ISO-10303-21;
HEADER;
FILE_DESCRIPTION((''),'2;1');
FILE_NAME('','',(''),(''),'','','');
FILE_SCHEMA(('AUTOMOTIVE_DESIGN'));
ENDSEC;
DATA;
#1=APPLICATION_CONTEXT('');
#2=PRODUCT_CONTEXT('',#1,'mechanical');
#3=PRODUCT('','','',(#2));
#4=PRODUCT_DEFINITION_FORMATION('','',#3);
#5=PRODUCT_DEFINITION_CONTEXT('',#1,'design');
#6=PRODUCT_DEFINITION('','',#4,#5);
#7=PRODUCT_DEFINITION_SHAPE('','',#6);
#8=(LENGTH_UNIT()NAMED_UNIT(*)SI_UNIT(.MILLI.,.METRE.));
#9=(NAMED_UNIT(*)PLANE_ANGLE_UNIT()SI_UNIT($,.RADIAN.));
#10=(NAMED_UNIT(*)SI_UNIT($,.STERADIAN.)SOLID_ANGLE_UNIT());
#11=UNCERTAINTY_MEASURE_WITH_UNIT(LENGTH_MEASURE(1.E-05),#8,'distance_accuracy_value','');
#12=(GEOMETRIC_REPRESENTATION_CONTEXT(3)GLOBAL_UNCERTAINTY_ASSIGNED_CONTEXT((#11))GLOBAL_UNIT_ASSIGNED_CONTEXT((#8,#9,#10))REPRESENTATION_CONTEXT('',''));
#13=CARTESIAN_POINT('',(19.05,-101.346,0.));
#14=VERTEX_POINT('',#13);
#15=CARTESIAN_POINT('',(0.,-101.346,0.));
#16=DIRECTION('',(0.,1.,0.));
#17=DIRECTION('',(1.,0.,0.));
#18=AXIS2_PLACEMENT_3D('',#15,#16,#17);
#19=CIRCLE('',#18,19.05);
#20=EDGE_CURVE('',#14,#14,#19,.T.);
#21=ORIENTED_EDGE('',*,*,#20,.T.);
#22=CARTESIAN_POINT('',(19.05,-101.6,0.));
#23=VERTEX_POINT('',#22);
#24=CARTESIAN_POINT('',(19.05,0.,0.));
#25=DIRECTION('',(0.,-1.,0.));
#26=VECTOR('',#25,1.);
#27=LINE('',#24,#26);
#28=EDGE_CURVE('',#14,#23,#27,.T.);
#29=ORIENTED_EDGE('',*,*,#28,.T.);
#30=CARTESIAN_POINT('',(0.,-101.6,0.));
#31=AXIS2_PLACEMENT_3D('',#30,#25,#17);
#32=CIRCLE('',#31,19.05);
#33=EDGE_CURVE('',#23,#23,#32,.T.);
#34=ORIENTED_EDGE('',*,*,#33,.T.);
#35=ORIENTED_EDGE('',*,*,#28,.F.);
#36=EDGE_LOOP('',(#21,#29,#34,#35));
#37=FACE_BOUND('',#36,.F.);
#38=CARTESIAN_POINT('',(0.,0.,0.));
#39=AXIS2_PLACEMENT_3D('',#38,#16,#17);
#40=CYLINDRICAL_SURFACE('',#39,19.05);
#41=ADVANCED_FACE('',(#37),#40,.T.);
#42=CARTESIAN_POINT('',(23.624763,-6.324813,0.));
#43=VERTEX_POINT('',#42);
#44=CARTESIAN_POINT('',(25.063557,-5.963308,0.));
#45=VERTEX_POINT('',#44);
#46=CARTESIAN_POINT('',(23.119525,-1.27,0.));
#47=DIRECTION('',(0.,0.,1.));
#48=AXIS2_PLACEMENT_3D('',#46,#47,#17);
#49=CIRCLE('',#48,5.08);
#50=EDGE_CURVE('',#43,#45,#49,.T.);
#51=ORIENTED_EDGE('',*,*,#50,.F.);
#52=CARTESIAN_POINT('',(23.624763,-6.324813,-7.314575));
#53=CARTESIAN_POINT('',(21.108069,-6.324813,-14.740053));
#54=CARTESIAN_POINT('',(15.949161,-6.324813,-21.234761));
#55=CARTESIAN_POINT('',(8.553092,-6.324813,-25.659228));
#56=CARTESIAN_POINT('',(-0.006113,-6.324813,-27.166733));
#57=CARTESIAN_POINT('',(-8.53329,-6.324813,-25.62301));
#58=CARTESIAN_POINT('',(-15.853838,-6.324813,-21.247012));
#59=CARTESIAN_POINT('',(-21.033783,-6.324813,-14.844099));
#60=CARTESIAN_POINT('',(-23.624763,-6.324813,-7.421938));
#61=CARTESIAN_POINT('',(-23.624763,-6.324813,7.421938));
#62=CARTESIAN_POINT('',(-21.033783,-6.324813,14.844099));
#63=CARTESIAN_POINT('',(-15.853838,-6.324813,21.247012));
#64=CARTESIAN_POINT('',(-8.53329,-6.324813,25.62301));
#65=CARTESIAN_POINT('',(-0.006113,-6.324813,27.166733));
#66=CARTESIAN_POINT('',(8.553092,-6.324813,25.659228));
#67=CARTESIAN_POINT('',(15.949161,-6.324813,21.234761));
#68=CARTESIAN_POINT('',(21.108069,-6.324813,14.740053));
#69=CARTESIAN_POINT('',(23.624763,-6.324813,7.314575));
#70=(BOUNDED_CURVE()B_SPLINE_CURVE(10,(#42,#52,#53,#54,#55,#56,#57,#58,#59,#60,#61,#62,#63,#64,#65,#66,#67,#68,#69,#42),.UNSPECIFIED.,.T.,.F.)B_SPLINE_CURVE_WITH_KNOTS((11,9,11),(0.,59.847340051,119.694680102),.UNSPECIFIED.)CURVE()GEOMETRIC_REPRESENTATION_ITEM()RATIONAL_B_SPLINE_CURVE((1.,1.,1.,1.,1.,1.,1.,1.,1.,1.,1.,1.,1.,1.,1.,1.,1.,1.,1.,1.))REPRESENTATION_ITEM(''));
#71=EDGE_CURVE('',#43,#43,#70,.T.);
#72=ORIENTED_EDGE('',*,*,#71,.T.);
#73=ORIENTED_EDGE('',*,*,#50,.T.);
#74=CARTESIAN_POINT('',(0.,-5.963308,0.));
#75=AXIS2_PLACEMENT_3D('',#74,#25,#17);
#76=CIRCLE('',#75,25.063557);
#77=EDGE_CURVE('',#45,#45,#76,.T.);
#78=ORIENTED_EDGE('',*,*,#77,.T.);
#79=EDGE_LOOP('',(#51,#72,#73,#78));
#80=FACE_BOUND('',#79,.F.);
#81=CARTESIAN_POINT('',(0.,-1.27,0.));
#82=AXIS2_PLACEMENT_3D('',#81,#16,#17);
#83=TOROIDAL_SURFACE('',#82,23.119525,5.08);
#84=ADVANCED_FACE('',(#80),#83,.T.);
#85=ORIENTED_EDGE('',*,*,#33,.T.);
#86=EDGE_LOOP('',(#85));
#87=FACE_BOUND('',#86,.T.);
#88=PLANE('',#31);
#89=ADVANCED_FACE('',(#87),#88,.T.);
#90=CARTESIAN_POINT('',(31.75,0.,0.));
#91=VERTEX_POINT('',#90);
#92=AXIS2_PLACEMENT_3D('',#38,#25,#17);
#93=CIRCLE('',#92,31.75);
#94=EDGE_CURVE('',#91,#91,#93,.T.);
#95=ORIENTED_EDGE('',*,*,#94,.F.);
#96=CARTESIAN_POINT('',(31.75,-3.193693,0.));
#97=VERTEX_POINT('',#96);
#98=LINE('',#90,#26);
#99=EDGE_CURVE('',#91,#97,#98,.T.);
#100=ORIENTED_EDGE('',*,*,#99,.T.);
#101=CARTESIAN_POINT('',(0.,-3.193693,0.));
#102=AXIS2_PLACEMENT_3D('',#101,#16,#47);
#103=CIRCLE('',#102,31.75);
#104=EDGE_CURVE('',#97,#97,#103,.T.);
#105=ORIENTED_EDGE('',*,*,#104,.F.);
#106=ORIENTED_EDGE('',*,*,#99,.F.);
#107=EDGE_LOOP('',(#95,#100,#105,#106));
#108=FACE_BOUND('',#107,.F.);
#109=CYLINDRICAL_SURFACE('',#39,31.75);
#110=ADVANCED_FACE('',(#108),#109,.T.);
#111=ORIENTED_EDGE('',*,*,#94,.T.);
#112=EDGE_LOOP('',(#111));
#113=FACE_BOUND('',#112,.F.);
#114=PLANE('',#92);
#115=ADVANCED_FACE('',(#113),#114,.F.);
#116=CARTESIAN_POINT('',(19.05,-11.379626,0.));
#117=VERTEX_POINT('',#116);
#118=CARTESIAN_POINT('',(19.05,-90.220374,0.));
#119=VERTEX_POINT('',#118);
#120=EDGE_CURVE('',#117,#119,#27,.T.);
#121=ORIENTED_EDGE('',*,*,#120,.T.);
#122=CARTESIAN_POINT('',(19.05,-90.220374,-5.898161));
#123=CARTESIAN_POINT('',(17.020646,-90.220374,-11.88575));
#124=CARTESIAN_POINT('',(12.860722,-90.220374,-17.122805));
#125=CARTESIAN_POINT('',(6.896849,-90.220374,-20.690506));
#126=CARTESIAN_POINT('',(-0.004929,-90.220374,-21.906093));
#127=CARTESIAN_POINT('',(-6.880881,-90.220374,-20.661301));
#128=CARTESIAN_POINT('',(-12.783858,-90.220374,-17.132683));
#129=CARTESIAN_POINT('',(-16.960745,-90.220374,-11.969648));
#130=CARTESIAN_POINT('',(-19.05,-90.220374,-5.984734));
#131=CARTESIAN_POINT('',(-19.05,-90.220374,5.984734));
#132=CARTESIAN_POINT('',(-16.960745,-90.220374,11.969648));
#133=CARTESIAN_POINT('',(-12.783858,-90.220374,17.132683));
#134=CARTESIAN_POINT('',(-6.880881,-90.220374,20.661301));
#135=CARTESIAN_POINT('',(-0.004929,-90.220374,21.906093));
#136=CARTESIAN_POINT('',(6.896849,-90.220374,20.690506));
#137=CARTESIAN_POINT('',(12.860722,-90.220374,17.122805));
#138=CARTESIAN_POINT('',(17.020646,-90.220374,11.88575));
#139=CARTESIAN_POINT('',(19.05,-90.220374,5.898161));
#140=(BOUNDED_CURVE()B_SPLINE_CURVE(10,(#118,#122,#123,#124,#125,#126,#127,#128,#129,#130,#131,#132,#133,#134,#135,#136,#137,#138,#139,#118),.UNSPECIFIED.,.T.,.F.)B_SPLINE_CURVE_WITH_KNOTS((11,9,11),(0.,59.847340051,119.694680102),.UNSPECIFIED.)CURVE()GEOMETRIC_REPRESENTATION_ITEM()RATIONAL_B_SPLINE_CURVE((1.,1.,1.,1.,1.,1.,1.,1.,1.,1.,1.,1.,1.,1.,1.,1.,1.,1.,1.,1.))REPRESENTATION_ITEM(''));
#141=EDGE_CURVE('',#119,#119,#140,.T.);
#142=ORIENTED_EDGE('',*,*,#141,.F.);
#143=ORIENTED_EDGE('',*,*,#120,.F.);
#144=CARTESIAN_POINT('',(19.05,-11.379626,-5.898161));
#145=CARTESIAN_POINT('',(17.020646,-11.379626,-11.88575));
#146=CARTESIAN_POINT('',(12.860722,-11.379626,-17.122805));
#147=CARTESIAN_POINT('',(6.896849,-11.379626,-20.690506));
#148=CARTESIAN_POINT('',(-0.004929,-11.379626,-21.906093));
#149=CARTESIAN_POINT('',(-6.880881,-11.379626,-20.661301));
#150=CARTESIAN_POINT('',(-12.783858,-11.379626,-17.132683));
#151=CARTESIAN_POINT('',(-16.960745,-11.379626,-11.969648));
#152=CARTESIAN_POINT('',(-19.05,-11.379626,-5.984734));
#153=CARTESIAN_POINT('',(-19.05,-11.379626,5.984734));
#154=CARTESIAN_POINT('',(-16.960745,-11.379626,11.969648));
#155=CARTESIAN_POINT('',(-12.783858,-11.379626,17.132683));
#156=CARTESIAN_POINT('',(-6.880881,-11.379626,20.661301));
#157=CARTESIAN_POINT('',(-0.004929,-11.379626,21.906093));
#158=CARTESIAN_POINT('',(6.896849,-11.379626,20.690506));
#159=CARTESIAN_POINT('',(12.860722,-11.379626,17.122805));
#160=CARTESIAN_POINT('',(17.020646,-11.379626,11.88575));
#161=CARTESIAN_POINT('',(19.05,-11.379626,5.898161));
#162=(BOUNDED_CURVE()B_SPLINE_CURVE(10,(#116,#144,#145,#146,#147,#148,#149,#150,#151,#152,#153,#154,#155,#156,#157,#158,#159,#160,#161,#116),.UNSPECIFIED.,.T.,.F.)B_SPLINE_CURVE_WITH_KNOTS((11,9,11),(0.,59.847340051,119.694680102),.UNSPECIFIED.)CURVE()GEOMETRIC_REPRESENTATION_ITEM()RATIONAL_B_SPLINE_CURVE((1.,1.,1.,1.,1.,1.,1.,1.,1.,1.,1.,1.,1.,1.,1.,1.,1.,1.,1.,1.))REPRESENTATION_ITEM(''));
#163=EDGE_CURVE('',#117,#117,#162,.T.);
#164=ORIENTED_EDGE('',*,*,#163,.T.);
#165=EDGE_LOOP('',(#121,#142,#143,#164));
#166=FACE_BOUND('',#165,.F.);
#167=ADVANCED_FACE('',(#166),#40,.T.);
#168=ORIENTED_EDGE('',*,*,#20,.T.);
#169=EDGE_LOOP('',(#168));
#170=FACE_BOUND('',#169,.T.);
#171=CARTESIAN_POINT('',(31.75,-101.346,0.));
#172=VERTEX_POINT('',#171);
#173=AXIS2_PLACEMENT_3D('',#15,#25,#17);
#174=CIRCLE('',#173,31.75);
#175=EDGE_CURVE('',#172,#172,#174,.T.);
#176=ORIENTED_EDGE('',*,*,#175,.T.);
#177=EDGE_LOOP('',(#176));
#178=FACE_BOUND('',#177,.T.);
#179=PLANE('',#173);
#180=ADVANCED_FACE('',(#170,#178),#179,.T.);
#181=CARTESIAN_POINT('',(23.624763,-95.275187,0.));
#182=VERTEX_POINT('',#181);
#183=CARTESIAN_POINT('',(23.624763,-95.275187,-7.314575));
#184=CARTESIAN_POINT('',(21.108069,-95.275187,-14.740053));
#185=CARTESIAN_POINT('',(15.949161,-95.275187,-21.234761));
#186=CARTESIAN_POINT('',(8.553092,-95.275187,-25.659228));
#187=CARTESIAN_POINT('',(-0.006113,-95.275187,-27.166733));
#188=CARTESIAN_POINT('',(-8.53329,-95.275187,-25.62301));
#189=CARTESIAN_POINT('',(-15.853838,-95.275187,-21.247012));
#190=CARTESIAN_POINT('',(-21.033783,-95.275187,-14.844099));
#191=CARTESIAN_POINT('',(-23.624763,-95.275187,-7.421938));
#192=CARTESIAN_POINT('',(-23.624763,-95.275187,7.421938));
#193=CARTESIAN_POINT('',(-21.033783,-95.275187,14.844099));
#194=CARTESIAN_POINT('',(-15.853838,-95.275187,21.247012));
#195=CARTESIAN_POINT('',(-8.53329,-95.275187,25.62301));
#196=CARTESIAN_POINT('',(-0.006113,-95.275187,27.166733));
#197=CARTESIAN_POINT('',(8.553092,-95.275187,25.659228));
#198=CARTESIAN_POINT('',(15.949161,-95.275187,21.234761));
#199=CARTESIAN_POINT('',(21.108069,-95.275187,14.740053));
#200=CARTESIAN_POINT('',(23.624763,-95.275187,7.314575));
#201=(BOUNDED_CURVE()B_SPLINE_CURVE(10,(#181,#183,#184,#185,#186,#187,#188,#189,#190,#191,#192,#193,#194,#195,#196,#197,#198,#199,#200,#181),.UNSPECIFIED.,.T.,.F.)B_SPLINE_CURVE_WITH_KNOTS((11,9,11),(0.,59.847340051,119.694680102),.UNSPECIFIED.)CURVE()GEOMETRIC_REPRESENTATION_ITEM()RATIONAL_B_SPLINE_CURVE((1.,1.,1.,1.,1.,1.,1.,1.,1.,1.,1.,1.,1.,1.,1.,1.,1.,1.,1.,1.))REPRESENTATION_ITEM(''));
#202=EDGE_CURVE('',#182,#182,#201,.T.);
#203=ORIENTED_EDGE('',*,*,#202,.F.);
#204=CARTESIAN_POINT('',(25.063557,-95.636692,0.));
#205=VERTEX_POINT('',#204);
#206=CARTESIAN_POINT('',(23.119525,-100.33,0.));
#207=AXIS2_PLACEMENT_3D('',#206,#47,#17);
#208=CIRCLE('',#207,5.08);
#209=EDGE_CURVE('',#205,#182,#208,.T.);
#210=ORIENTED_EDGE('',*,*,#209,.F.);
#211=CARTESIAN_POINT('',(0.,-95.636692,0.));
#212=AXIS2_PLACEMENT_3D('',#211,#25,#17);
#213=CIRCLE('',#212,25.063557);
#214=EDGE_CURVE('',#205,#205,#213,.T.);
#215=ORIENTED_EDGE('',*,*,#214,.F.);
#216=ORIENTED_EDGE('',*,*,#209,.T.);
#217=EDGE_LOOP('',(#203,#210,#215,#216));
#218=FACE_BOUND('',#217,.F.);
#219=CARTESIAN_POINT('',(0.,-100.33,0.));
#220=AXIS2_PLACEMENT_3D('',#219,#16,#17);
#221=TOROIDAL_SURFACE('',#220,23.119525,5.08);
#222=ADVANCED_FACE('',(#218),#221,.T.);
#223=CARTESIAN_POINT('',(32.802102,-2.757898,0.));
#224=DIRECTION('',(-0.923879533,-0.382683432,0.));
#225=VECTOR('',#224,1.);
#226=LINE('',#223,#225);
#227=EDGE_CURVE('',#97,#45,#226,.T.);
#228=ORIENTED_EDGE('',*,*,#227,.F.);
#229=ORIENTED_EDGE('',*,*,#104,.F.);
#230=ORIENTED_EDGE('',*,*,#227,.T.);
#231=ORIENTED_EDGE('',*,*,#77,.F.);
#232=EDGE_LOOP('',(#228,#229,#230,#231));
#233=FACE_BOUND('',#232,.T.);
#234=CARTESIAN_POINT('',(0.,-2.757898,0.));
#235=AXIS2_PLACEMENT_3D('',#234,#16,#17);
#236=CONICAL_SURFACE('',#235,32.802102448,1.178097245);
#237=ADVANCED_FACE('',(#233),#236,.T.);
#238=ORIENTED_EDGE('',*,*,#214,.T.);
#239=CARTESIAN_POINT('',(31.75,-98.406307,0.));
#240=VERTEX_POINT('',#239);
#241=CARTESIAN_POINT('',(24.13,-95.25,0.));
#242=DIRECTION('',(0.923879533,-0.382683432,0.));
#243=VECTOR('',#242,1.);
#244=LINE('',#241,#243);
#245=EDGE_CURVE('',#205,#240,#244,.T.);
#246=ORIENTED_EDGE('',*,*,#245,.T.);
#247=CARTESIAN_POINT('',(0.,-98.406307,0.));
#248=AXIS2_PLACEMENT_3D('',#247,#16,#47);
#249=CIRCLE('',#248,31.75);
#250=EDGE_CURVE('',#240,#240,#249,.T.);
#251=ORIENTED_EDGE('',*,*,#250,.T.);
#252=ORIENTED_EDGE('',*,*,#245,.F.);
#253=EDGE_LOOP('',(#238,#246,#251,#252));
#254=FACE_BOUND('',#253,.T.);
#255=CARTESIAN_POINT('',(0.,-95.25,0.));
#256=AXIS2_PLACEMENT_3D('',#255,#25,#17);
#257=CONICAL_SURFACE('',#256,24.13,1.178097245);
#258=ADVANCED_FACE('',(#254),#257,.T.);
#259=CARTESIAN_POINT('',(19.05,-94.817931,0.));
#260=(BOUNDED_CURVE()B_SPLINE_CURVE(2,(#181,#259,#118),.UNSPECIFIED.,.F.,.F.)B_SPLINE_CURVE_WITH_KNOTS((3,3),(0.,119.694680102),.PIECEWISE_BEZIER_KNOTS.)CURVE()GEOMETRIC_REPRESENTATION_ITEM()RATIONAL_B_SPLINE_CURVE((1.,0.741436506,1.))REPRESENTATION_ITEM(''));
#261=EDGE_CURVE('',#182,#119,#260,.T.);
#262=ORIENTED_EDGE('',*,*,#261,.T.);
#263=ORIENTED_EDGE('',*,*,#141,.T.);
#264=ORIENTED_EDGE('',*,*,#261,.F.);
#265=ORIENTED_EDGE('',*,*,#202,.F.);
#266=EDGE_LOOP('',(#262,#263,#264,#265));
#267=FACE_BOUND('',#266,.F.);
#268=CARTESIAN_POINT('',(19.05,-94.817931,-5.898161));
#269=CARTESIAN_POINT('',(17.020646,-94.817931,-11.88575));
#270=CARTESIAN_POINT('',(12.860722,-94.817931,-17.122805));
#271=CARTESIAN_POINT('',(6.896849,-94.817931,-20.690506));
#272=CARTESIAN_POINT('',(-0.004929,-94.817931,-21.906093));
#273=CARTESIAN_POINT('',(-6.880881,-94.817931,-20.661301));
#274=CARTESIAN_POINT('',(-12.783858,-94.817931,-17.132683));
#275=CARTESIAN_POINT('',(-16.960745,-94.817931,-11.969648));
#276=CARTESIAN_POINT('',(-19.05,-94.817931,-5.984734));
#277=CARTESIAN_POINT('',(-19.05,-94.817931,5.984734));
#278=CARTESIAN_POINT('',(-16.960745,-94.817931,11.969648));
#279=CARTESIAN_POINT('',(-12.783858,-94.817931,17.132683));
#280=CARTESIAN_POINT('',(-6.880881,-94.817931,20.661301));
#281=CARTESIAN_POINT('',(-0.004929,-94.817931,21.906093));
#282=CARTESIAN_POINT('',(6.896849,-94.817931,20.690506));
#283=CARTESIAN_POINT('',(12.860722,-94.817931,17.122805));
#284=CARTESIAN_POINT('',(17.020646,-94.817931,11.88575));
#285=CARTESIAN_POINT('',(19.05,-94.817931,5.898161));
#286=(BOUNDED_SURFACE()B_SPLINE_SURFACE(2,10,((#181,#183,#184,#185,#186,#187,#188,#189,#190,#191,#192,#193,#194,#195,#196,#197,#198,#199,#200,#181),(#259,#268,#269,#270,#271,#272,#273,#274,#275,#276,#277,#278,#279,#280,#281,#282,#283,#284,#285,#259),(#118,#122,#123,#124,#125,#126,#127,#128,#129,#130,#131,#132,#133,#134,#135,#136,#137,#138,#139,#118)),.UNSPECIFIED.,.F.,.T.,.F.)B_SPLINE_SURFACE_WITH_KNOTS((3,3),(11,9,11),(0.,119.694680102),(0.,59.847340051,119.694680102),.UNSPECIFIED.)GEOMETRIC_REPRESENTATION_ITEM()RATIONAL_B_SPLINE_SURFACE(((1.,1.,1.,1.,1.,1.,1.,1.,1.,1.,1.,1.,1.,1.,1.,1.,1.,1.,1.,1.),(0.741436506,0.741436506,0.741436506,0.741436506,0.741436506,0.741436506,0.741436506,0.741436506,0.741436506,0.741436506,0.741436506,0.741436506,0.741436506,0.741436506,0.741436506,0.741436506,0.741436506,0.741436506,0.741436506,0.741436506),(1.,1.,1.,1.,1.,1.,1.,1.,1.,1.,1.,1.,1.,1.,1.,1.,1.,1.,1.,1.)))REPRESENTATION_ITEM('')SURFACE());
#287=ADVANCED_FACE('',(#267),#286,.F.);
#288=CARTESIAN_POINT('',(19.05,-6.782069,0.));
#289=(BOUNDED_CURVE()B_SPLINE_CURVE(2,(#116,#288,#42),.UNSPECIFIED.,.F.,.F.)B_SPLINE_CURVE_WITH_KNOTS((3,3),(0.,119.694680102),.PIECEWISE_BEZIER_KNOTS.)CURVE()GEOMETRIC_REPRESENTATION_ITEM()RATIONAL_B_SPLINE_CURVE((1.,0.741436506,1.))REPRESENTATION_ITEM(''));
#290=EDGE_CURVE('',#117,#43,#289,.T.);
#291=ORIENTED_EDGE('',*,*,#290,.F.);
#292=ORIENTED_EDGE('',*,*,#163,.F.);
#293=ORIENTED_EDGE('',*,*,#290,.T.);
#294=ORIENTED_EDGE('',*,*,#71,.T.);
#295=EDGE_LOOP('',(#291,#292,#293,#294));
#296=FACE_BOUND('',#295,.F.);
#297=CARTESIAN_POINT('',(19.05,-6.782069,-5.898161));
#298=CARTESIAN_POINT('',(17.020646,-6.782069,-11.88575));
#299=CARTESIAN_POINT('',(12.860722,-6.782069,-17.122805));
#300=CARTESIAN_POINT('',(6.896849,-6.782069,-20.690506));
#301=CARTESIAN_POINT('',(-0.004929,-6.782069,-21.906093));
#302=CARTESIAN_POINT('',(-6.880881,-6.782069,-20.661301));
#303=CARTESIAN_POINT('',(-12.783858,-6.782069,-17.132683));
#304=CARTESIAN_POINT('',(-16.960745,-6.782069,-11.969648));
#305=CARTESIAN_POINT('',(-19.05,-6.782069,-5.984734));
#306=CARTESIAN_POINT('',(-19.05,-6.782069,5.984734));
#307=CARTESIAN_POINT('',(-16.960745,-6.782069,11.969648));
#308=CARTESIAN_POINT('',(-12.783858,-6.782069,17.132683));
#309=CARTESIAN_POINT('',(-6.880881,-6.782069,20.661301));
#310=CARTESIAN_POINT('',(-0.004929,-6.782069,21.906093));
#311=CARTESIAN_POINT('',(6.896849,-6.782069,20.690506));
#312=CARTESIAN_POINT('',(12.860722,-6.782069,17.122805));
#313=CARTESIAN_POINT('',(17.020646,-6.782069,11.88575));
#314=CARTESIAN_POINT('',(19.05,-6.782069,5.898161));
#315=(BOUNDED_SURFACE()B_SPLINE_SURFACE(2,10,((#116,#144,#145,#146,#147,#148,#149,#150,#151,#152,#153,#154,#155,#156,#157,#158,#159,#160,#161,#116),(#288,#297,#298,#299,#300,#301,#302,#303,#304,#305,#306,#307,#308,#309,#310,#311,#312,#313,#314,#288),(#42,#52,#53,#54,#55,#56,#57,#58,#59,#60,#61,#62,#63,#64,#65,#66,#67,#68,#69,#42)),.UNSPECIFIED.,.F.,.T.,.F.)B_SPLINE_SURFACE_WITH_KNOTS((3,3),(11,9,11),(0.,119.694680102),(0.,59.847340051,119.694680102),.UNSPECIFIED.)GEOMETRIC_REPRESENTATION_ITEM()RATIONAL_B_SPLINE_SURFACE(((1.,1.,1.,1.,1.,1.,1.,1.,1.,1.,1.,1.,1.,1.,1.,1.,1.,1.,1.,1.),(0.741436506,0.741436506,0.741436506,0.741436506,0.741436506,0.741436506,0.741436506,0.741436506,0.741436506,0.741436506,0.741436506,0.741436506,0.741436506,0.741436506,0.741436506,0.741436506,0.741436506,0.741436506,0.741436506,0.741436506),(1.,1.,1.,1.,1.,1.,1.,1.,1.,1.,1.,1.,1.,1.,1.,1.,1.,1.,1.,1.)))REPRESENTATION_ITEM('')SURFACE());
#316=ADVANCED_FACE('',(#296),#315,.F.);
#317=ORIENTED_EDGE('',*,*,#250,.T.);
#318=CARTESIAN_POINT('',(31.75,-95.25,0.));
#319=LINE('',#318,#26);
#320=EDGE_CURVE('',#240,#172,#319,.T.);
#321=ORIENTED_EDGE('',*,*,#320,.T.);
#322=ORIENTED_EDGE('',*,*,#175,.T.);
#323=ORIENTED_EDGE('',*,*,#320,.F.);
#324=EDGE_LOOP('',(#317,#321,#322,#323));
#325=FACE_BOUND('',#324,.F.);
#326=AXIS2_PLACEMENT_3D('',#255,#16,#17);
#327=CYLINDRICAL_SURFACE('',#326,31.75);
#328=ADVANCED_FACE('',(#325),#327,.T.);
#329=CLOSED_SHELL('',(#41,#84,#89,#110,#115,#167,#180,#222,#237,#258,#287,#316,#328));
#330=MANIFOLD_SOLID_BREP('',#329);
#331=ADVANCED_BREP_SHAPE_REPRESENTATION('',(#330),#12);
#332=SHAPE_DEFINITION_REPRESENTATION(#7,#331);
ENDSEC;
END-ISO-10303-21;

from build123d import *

# Parameters (mm, degrees)
F0_R     = 19.05
F1_DEPTH = 101.6
F2_R     = 31.75
F3_DEPTH = 6.35
F5_START = 95.25
F4_R     = 31.75
F5_DEPTH = 6.096
F6_SIZE  = 2.54
F8_R     = 5.08
F9_R     = 5.08


# Not quite as in the source:
# - a fillet or chamfer that OpenCascade refuses, or shapes differently, is made with other operations: its cross-section is extruded or revolved along the edge and cut away or added


with BuildPart() as f1:
    # F0 (on Front) → F1 (new body)
    with BuildSketch(Plane.XZ):
        Circle(F0_R)
    extrude(amount=F1_DEPTH)

    # F2 (on Front) → F3 (join)
    with BuildSketch(Plane.XZ):
        Circle(F2_R)
    extrude(amount=F3_DEPTH)

    # F4 (on Front) → F5 (join)
    with BuildSketch(Plane.XZ.offset(F5_START)):
        Circle(F4_R)
    extrude(amount=F5_DEPTH)

    # F6
    f6_edges = [f1.edges().sort_by_distance(p)[0] for p in [
        (-31.75, -6.35, 0),
        (-31.75, -95.25, 0),
    ]]
    chamfer(f6_edges, length=F6_SIZE)

    # F7: chamfer of 5.08 on 2 edges, made by hand

    # F7_s1 → F7_t2 (revolve, cut)
    with BuildSketch(Plane.XY):
        Polygon((24.13, -95.25), (32.8021024484, -98.8421024484), (29.21, -95.25), align=None)
    revolve(axis=Axis((0, -95.25, 0), (0, -1, 0)), mode=Mode.SUBTRACT)

    # F7_s3 → F7_t4 (revolve, cut)
    with BuildSketch(Plane.XY):
        Polygon((32.8021024484, -2.7578975516), (24.13, -6.35), (29.21, -6.35), align=None)
    revolve(axis=Axis((0, -6.35, 0), (0, -1, 0)), mode=Mode.SUBTRACT)

    # F8
    f8_edges = [f1.edges().sort_by_distance(p)[0] for p in [
        (-24.13, -6.35, 0),
        (-24.13, -95.25, 0),
    ]]
    fillet(f8_edges, radius=F8_R)

    # F9
    f9_edges = [f1.edges().sort_by_distance(p)[0] for p in [
        (-19.05, -95.25, 0),
        (-19.05, -6.35, 0),
    ]]
    fillet(f9_edges, radius=F9_R)


solid = f1.part
